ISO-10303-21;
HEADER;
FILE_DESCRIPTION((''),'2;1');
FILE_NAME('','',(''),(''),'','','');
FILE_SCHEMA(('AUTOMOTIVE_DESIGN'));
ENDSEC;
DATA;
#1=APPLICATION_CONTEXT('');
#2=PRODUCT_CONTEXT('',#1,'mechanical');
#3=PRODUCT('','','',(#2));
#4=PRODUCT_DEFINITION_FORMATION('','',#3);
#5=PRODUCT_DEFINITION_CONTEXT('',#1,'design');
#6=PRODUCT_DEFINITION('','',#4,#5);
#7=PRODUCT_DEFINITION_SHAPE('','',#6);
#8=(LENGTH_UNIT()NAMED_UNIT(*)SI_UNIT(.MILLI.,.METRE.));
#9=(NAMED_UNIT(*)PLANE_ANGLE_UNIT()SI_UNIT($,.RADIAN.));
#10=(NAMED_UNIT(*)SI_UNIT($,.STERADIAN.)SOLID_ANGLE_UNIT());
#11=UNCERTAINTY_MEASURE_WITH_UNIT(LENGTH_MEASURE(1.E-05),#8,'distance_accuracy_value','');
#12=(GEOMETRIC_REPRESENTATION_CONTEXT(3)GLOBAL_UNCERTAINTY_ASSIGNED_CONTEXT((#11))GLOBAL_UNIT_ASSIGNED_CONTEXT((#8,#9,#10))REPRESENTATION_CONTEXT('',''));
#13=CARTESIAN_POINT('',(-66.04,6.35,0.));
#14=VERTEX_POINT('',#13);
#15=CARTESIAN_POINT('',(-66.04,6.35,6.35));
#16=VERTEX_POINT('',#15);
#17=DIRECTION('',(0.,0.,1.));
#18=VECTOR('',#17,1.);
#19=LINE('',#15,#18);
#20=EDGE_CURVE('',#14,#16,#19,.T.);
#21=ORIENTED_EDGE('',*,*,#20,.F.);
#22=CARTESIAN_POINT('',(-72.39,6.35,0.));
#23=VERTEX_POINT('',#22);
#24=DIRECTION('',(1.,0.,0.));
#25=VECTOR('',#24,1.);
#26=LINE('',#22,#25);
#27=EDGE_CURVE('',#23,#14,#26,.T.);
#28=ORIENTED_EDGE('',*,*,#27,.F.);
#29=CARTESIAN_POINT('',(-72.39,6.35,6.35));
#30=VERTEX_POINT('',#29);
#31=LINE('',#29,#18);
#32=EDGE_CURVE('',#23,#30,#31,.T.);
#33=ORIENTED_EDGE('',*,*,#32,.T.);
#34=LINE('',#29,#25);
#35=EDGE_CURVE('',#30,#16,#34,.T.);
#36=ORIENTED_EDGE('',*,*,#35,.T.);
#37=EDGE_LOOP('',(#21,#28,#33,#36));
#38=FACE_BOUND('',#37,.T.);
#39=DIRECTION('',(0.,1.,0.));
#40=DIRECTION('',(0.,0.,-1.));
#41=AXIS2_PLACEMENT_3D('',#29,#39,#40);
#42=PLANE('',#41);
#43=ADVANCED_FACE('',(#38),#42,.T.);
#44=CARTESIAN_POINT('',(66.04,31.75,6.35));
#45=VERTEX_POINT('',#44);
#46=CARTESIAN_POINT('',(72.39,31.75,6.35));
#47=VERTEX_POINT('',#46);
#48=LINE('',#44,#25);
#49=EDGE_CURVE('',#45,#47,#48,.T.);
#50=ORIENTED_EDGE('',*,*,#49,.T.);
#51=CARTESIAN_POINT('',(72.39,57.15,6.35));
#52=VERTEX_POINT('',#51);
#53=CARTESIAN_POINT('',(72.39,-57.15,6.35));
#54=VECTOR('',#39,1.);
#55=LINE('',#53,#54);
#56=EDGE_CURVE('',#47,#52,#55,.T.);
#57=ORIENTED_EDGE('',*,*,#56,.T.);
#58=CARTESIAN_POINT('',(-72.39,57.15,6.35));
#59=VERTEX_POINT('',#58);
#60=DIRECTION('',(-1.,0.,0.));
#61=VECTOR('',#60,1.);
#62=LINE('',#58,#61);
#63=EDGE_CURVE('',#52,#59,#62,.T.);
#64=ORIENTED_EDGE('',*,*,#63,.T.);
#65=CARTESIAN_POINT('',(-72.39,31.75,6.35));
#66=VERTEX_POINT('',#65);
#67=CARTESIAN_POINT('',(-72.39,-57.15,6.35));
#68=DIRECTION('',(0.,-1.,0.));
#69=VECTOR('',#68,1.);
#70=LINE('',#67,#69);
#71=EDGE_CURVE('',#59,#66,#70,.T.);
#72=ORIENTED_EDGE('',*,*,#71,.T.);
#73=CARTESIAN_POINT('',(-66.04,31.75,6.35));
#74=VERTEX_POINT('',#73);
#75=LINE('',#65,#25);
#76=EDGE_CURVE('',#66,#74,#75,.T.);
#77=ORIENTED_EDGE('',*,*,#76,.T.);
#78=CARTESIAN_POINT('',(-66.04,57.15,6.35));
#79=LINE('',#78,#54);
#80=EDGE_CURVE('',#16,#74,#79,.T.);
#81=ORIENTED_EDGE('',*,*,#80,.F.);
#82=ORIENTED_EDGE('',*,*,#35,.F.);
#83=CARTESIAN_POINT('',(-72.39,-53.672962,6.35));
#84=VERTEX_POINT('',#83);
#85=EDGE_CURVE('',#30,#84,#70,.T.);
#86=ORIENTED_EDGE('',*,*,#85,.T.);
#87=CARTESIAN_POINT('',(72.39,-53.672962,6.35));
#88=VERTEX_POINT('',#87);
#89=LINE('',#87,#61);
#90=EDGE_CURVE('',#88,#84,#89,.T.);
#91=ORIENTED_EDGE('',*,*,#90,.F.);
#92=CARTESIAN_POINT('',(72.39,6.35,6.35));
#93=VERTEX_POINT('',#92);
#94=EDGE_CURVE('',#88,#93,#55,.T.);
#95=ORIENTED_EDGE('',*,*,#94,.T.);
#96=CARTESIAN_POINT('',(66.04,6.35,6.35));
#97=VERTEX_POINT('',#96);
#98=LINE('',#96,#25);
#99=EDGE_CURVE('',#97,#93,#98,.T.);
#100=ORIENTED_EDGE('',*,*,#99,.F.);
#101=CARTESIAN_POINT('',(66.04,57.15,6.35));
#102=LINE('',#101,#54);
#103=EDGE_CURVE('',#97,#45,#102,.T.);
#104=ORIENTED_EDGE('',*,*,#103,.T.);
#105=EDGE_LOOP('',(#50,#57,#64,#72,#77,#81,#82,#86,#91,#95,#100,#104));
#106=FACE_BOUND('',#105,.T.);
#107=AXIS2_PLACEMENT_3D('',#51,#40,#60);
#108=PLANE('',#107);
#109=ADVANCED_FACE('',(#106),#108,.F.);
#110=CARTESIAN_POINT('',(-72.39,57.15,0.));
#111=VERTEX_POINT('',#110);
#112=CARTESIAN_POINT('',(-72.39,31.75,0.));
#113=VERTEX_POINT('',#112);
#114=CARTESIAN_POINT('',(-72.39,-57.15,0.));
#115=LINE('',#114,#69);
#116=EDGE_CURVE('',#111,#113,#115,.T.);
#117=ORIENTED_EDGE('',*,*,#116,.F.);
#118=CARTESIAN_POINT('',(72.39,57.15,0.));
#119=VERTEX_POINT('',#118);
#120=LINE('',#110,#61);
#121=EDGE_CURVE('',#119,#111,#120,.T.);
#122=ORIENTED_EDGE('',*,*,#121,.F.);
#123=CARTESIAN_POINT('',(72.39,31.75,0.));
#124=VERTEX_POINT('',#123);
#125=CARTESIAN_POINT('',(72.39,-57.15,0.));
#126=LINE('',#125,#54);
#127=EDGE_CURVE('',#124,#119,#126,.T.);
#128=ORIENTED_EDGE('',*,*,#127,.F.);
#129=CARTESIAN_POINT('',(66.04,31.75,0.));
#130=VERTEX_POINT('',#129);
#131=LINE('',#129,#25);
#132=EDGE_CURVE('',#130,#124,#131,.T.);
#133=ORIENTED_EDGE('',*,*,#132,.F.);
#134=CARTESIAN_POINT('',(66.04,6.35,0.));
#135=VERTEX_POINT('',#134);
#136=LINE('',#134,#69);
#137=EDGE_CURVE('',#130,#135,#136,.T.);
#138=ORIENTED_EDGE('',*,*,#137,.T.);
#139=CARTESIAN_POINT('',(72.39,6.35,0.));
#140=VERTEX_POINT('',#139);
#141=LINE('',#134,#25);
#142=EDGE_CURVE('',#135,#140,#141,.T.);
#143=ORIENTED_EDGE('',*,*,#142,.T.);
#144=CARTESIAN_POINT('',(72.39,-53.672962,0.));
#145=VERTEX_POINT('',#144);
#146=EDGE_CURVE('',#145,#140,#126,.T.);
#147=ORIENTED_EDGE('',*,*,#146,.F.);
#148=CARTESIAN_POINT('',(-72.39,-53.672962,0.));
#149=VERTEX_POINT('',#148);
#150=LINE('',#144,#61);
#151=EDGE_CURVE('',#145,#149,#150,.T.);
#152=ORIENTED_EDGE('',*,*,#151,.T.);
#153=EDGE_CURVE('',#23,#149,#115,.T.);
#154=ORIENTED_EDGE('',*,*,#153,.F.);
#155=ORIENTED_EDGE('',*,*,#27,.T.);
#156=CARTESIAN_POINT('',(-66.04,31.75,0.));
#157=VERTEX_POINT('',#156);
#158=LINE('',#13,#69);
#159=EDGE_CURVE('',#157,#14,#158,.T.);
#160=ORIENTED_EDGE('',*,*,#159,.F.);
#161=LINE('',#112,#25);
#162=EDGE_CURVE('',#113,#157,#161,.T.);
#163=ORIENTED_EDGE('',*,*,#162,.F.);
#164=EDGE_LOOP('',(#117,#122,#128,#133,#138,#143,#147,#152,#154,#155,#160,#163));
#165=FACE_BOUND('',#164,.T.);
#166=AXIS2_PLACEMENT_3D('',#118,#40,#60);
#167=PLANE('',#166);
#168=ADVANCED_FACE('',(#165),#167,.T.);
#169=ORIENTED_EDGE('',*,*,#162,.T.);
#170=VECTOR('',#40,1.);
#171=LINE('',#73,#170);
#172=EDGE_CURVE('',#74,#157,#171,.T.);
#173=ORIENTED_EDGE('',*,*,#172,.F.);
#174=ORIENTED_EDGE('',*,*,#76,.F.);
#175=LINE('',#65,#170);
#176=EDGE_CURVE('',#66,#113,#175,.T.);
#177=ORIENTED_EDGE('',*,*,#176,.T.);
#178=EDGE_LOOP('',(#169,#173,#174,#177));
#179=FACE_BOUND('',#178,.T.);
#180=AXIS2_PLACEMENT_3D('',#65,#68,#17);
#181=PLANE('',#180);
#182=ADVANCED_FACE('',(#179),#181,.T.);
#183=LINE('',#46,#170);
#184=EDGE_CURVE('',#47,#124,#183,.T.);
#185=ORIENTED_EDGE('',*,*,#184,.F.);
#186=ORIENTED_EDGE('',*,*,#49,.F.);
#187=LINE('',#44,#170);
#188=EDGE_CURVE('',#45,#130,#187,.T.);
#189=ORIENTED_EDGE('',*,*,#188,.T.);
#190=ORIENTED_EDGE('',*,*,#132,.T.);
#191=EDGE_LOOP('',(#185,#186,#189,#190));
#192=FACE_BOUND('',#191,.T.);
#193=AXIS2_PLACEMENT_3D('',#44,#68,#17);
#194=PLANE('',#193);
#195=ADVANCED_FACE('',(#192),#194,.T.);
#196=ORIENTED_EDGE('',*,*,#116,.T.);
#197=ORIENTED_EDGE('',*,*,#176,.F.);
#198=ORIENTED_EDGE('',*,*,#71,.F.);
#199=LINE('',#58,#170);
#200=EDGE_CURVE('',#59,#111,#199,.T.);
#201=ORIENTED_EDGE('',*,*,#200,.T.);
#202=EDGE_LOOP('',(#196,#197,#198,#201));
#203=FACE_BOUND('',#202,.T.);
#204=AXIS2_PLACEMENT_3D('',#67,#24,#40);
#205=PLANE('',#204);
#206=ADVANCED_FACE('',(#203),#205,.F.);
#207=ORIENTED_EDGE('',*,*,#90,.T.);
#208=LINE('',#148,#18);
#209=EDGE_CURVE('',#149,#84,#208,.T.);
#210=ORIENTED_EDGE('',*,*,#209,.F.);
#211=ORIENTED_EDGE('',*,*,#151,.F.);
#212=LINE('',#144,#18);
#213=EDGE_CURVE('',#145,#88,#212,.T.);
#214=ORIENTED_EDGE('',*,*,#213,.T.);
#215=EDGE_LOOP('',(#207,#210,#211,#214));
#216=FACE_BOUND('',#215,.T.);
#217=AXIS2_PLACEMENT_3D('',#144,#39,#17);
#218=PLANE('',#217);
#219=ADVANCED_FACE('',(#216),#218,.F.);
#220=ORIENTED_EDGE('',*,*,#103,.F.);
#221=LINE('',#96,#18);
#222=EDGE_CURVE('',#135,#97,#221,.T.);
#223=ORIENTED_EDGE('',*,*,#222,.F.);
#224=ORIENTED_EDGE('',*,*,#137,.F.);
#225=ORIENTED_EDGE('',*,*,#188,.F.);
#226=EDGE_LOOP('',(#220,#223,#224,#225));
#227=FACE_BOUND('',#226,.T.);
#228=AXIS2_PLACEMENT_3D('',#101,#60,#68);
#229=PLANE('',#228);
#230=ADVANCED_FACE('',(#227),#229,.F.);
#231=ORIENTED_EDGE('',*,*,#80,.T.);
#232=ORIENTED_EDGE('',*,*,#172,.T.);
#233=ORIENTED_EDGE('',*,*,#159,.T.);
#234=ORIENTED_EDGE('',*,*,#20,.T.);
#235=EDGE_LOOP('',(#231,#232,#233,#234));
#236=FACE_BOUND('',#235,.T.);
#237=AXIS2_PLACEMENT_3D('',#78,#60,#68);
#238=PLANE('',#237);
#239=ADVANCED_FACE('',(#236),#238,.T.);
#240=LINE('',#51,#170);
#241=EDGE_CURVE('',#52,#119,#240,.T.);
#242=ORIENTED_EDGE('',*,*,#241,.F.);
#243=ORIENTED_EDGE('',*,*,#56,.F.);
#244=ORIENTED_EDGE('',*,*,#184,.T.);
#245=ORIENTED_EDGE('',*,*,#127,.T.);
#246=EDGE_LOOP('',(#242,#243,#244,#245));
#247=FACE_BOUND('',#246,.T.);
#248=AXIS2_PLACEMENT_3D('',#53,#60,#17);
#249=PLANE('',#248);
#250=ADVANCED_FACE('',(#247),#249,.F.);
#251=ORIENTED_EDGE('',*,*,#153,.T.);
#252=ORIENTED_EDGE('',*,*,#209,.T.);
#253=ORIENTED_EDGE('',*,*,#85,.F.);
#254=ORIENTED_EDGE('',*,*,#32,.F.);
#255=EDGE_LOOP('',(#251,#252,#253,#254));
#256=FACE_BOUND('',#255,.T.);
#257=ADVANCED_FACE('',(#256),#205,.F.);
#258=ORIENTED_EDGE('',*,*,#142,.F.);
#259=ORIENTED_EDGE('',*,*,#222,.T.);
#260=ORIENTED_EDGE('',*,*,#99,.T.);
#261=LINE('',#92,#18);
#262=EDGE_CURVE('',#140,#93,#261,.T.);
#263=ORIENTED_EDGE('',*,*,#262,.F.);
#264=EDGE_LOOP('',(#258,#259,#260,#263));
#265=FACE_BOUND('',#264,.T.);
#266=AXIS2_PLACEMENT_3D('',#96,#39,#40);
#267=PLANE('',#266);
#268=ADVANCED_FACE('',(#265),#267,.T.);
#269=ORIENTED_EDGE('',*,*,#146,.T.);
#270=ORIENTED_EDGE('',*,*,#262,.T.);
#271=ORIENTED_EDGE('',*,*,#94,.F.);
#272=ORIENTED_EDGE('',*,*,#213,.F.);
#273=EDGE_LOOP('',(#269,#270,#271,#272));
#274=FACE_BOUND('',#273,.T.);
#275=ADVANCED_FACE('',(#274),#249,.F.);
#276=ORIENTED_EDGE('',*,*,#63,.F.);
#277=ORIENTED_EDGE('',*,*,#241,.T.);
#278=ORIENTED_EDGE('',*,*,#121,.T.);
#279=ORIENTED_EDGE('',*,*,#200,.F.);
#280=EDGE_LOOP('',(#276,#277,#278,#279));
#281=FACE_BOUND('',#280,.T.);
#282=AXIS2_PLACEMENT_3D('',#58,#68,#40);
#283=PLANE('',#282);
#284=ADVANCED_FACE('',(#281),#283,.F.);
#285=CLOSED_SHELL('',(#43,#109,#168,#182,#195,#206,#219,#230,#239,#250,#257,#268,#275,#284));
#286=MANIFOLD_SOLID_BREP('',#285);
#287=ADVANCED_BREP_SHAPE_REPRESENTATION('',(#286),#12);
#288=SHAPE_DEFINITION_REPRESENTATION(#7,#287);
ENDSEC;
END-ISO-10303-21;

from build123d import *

# Parameters (mm, degrees)
SKETCH1_W           = 144.78
SKETCH1_H           = 114.3
BOSS_EXTRUDE1_DEPTH = 6.35
CAVITY1_START       = -72.39
CAVITY1_OUTLINE_W   = 25.4
CAVITY1_OUTLINE_H   = 6.35
CAVITY1_DEPTH       = 6.35
CAVITY1_START_2     = 66.04
CAVITY1_2_OUTLINE_W = 25.4
CAVITY1_2_OUTLINE_H = 6.35
CAVITY1_2_DEPTH     = 6.35
SKETCH4_W           = 144.78
SKETCH4_H           = 3.477037696
CUT_EXTRUDE2_DEPTH  = 93.448672787


# Read off the part's stored shape, not the designer's step: Cavity1
with BuildPart() as part:
    # Sketch1 → Boss-Extrude1 (new body)
    with BuildSketch(Plane.XY):
        Rectangle(SKETCH1_W, SKETCH1_H)
    extrude(amount=BOSS_EXTRUDE1_DEPTH)

    # Cavity1 outline → Cavity1 (cut)
    with BuildSketch(Plane.YZ.offset(CAVITY1_START)):
        with Locations((19.05, 3.175)):
            Rectangle(CAVITY1_OUTLINE_W, CAVITY1_OUTLINE_H)
    extrude(amount=CAVITY1_DEPTH, mode=Mode.SUBTRACT)

    # Cavity1 2 outline → Cavity1 2 (cut)
    with BuildSketch(Plane.YZ.offset(CAVITY1_START_2)):
        with Locations((19.05, 3.175)):
            Rectangle(CAVITY1_2_OUTLINE_W, CAVITY1_2_OUTLINE_H)
    extrude(amount=CAVITY1_2_DEPTH, mode=Mode.SUBTRACT)

    # Sketch4 → Cut-Extrude2 (cut, through all)
    with BuildSketch(Plane.XY.offset(6.35)):
        with Locations((0, -55.411481152)):
            Rectangle(SKETCH4_W, SKETCH4_H)
    extrude(amount=-CUT_EXTRUDE2_DEPTH, mode=Mode.SUBTRACT)


solid = part.part
